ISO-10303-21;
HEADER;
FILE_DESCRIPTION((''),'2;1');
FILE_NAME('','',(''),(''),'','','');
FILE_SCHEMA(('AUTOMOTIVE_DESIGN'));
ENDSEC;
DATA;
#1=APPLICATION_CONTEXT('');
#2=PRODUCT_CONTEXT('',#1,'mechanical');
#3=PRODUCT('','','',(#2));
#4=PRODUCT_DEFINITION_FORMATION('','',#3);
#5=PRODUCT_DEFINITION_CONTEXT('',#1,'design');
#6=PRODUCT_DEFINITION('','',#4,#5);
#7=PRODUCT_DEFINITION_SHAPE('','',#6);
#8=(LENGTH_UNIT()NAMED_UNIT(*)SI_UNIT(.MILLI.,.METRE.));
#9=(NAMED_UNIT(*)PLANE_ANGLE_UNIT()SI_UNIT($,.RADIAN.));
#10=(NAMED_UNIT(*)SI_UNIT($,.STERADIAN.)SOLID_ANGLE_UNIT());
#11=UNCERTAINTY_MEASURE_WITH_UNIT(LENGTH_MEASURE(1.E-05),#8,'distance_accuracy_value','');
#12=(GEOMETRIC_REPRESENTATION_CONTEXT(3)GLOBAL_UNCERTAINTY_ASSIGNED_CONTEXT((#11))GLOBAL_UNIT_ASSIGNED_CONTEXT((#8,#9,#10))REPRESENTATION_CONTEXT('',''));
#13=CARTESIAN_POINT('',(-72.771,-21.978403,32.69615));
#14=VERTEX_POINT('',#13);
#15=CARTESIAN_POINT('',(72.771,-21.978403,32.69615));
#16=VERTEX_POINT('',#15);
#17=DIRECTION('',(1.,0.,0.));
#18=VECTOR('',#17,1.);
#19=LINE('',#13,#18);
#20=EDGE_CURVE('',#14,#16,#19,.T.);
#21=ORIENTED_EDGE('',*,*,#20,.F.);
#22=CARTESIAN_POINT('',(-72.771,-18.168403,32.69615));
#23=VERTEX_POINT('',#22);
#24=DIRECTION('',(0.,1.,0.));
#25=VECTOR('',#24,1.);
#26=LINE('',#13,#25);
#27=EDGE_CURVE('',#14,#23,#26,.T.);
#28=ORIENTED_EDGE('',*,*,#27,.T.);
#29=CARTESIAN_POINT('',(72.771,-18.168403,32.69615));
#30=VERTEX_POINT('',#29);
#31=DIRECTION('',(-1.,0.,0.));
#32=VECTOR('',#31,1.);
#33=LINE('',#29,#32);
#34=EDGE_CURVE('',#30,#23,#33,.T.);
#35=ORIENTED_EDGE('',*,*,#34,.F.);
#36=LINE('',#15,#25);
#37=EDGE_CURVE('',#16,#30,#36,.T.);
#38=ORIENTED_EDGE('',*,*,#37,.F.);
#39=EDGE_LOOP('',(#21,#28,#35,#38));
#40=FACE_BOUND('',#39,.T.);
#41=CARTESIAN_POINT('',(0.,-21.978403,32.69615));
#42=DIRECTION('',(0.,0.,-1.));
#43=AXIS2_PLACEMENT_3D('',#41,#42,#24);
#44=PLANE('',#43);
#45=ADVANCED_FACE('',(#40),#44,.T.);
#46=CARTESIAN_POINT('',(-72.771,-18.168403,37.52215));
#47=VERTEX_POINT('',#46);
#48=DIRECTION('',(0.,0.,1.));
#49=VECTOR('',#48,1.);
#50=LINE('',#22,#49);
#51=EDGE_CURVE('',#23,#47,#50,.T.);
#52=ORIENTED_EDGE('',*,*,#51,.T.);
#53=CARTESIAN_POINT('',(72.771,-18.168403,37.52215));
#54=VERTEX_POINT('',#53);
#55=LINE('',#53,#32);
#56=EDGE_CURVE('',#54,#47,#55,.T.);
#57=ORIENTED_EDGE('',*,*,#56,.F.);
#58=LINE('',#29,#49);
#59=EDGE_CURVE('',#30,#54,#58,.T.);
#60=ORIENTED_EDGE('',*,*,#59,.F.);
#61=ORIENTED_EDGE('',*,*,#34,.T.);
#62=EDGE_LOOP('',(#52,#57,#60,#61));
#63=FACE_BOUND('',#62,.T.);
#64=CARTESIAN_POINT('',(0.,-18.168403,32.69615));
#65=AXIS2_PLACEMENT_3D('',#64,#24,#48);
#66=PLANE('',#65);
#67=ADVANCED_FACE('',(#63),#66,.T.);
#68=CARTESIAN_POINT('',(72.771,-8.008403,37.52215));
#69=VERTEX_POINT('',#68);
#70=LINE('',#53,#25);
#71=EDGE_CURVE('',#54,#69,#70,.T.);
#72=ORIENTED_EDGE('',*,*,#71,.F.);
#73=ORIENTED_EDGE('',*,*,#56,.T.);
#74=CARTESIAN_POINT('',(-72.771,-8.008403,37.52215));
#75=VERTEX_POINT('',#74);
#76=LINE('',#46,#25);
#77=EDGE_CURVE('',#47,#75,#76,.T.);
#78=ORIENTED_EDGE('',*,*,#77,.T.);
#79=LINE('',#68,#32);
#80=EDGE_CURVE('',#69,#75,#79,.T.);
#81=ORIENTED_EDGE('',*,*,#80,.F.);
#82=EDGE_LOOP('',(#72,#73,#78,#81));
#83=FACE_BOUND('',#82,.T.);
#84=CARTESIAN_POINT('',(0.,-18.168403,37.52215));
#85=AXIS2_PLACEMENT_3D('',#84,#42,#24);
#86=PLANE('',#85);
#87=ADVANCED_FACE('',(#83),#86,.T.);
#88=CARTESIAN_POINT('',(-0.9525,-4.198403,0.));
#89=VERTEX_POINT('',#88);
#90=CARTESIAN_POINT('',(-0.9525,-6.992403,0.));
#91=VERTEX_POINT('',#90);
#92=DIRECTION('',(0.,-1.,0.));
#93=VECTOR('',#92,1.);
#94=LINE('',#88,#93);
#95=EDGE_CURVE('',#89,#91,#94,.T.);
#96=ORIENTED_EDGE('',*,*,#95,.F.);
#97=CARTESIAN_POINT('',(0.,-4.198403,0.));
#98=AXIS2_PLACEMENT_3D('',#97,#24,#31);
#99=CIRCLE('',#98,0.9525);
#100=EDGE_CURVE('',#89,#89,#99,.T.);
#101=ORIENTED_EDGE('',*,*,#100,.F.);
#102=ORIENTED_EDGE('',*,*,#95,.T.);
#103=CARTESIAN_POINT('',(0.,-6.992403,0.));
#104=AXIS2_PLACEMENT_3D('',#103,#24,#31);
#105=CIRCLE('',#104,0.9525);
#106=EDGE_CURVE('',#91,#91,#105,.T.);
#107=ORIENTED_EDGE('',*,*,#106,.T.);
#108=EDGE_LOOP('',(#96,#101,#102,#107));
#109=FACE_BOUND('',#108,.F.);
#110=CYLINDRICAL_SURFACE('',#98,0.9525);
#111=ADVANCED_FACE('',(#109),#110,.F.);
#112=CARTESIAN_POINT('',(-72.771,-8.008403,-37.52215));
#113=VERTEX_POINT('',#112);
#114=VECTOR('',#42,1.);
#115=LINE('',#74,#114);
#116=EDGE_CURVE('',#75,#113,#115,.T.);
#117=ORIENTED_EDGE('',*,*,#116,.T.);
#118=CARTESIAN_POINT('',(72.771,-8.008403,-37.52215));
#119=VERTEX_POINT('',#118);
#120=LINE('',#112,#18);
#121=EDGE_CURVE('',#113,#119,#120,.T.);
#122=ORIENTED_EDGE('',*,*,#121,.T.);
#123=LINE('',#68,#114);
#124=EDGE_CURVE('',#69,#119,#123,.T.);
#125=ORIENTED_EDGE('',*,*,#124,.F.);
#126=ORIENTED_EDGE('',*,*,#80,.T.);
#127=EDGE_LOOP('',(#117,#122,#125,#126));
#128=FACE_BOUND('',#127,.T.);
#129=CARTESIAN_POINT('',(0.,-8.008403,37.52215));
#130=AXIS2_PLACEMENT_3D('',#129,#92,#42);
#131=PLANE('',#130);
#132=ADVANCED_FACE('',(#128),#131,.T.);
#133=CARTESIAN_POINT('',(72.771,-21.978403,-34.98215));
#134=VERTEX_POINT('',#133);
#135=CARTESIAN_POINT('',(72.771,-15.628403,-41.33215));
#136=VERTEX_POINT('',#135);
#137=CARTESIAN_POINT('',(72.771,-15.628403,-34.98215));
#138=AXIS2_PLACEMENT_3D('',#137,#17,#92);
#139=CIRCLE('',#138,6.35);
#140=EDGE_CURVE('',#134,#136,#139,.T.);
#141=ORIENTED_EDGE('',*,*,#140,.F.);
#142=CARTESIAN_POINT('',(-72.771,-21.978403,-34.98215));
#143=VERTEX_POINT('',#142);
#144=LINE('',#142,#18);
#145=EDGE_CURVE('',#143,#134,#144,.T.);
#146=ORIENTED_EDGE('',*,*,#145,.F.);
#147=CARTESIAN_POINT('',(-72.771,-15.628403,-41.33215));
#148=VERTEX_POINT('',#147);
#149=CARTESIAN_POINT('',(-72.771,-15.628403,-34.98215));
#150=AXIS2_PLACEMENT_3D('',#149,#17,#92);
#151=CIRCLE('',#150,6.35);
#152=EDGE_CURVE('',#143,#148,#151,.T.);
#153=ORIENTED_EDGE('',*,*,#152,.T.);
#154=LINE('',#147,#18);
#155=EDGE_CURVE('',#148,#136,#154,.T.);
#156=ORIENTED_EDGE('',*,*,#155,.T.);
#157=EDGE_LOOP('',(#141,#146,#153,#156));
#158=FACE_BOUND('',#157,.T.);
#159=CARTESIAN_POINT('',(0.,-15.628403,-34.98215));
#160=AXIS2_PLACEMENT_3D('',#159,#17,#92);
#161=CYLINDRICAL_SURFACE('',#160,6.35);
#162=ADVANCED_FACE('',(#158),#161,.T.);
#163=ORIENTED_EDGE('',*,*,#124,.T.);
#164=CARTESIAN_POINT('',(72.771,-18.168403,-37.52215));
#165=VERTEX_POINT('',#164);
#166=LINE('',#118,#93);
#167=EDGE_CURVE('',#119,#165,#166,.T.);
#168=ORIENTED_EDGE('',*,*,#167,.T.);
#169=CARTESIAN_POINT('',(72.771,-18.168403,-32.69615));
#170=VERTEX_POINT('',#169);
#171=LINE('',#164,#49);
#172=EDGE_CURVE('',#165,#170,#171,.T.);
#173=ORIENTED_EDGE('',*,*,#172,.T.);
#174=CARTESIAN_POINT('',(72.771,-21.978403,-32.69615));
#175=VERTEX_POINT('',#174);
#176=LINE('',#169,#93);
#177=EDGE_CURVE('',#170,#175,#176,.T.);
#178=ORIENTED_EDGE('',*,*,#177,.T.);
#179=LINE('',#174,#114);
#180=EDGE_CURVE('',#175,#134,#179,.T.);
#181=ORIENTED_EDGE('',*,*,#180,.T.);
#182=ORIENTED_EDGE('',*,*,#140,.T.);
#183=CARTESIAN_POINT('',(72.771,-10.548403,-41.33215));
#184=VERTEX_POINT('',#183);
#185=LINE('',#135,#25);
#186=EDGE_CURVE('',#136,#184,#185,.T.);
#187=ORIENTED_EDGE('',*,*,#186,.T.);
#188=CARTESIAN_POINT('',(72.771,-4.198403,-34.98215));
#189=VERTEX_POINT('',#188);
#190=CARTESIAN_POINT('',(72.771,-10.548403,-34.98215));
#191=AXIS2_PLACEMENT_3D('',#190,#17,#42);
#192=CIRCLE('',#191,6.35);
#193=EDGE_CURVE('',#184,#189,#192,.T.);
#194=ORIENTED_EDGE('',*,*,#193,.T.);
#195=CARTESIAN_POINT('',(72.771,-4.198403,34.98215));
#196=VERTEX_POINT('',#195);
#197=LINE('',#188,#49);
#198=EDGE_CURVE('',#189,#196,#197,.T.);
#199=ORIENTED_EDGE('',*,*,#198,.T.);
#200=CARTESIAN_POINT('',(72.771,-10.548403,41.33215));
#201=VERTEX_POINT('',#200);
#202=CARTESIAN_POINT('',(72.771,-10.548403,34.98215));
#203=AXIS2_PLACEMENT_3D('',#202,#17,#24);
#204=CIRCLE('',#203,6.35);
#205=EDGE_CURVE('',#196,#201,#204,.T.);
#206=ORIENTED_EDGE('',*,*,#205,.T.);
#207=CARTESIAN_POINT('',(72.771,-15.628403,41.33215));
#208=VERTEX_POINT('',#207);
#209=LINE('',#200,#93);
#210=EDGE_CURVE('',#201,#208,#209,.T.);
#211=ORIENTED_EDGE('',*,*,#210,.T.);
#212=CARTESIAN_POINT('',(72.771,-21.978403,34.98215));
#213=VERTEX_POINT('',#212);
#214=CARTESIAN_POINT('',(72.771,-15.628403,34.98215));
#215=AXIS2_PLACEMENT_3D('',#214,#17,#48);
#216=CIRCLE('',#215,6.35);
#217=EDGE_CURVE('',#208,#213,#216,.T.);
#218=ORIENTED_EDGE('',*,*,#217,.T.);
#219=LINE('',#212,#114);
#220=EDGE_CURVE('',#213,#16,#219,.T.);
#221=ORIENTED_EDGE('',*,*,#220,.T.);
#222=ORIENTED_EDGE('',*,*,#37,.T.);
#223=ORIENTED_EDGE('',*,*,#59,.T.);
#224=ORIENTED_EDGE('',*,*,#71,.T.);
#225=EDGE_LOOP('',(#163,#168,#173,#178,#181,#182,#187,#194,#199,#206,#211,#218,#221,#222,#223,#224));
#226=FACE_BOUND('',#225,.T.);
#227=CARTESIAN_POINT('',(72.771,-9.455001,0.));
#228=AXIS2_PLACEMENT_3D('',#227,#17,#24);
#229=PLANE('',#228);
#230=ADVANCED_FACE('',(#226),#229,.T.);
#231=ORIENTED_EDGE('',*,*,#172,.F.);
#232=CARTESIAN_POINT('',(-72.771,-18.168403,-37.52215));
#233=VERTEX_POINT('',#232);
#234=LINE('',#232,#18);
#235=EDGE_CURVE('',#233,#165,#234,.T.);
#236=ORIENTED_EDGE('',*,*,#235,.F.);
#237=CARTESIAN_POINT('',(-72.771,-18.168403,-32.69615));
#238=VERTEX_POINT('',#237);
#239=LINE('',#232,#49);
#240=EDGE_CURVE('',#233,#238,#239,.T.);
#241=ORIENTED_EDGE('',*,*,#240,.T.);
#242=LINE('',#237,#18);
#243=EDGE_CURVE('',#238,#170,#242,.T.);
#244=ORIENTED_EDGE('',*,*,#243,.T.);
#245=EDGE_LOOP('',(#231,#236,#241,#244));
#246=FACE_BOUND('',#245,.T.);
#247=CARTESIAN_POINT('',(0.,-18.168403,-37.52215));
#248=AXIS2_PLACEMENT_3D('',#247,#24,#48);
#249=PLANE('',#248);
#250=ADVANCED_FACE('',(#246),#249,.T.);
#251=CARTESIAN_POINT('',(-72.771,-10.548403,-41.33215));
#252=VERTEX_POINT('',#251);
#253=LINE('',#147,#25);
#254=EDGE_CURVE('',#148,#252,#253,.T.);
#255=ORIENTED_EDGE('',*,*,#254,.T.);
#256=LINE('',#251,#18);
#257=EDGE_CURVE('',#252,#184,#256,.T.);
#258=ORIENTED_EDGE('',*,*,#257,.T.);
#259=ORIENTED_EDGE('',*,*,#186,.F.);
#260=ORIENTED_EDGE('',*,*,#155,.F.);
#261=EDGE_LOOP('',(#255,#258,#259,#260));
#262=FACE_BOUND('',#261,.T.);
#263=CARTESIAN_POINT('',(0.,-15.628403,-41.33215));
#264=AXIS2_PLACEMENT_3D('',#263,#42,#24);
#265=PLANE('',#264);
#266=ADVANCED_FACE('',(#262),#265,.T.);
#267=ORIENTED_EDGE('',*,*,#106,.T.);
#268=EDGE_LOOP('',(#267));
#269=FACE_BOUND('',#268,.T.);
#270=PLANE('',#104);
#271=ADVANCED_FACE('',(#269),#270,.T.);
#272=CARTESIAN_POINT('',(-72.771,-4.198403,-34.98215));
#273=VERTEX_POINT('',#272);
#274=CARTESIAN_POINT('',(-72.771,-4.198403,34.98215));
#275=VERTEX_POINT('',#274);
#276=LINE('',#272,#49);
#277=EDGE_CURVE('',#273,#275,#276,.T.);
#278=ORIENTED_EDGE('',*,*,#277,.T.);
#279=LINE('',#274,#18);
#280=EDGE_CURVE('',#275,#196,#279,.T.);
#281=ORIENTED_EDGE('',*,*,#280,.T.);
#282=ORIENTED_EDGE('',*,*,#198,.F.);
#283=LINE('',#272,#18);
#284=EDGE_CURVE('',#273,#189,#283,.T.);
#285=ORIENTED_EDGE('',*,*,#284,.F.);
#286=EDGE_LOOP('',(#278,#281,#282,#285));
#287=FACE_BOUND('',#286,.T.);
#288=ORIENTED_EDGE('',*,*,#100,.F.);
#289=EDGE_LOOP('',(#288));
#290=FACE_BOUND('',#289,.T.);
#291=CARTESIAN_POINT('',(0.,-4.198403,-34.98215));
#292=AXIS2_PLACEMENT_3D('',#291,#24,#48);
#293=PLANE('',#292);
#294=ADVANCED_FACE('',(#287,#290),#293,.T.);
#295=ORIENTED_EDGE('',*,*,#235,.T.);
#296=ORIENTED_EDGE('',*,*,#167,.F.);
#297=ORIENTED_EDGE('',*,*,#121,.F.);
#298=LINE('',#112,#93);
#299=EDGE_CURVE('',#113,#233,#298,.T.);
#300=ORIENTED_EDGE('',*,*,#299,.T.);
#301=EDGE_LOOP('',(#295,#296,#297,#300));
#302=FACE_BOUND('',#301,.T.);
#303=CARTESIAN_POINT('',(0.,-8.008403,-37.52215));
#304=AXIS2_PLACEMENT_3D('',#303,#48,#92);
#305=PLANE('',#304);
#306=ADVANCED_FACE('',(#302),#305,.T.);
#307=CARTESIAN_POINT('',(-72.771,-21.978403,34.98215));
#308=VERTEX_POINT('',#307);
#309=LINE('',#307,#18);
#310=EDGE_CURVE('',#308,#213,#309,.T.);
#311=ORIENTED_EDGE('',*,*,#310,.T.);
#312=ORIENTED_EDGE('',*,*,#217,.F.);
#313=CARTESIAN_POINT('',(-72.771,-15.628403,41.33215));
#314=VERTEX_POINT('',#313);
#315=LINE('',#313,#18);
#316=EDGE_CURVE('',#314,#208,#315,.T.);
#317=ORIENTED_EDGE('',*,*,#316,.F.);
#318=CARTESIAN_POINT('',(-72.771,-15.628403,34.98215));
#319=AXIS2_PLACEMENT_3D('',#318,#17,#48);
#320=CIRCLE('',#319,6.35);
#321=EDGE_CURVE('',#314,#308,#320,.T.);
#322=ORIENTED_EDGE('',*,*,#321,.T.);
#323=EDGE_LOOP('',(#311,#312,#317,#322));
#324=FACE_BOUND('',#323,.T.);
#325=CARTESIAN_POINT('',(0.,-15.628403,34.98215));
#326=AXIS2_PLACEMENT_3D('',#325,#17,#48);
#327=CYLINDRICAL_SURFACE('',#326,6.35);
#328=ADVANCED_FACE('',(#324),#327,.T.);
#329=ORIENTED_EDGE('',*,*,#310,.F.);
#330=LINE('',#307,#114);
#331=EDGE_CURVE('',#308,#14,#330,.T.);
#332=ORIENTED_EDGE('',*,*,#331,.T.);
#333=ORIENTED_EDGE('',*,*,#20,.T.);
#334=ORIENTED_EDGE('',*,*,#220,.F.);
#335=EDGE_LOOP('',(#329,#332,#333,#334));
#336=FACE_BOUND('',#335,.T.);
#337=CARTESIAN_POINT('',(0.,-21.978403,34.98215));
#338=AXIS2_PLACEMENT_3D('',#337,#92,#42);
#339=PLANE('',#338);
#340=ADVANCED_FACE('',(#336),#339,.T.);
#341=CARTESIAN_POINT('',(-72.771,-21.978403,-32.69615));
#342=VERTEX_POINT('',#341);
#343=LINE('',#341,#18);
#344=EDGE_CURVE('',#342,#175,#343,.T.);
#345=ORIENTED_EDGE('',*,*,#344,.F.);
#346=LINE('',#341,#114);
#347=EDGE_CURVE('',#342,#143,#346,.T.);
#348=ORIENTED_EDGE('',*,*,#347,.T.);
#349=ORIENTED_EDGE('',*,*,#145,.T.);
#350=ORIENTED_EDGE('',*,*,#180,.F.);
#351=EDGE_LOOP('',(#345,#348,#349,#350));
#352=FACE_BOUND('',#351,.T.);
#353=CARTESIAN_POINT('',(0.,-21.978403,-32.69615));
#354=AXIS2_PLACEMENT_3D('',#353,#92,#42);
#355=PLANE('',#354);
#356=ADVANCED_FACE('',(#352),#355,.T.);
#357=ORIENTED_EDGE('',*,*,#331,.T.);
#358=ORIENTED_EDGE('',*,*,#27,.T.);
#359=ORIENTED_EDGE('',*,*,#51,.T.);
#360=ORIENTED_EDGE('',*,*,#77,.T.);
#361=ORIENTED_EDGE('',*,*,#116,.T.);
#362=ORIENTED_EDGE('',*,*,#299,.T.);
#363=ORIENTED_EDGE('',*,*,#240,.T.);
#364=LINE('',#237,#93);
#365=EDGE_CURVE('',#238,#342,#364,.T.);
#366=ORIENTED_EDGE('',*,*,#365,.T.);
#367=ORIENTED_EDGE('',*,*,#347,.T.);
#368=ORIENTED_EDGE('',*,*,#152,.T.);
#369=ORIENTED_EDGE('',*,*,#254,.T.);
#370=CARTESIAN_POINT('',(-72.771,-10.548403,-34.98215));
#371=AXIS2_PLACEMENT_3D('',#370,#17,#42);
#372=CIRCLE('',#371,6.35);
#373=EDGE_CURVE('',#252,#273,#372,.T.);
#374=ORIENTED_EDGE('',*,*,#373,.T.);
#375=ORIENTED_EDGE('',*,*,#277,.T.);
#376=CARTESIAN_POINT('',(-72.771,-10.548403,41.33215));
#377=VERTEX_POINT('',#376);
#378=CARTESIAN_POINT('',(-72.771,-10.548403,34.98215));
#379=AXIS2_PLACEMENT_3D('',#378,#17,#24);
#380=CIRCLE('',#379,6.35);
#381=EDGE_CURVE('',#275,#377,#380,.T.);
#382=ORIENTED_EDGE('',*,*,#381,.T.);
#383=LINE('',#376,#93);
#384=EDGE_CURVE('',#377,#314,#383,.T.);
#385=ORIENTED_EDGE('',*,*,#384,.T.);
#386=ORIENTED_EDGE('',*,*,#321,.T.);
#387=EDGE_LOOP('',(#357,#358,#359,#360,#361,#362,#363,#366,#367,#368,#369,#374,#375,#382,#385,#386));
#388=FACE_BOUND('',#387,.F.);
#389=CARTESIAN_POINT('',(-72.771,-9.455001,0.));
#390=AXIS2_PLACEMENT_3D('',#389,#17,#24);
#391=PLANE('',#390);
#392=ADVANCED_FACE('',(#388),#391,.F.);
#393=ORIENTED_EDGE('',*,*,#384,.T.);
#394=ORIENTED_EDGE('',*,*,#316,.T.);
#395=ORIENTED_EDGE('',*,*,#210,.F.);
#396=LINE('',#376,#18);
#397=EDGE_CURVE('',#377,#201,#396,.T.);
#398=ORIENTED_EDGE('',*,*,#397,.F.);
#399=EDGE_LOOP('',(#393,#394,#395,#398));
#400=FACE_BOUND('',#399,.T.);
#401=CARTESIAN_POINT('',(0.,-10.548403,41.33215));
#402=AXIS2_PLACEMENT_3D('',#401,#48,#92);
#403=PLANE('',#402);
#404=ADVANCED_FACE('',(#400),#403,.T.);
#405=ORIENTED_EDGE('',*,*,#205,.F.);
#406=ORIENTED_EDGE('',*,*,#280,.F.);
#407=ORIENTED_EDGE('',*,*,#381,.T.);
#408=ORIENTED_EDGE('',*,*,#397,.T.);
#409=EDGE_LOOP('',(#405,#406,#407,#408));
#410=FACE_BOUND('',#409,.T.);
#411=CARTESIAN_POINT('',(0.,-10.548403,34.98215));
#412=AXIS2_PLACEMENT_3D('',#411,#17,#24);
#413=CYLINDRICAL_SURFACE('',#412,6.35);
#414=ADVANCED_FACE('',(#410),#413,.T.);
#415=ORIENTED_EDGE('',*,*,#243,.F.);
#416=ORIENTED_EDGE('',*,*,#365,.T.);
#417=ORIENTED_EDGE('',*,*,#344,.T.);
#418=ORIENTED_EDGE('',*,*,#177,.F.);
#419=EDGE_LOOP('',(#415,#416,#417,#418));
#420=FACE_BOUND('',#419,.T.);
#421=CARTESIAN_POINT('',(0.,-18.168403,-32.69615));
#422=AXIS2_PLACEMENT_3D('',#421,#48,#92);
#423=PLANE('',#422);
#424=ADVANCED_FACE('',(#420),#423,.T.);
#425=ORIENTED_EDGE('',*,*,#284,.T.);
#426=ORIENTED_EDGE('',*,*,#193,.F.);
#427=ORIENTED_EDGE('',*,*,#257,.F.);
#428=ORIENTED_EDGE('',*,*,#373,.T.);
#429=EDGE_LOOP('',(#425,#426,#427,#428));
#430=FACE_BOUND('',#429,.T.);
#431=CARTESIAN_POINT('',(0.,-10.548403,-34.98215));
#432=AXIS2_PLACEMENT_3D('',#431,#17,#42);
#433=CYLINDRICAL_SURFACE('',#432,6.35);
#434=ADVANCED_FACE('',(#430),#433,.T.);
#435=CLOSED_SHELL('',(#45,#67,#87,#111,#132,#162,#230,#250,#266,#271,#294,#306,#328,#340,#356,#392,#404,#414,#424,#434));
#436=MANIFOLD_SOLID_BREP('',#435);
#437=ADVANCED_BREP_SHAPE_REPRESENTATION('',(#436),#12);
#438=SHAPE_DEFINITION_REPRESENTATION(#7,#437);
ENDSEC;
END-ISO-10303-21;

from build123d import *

# Parameters (mm, degrees)
F1_DEPTH      = 72.771
F1_DEPTH_BACK = 72.771
F2_R          = 0.9525
F3_DEPTH      = 2.794


# Not quite as in the source:
# - a length typed as a fraction of an inch, garbled in the dataset ("3 / 203.2 mm" for 3/8 in), is restored


with BuildPart() as f1:
    # F0 (on Right) → F1 (new body, two sides)
    with BuildSketch(Plane.YZ) as f1_sk:
        with BuildLine():
            Line((-8.008403407, 37.52215), (-8.008403407, 0))
            Line((-8.008403407, 0), (-8.008403407, -37.52215))
            Line((-8.008403407, -37.52215), (-18.168403407, -37.52215))
            Line((-18.168403407, -37.52215), (-18.168403407, -32.69615))
            Line((-18.168403407, -32.69615), (-21.978403407, -32.69615))
            Line((-21.978403407, -32.69615), (-21.978403407, -34.98215))
            ThreePointArc((-21.978403407, -34.98215), (-20.1185314675, -39.4722780605), (-15.628403407, -41.33215))
            Line((-15.628403407, -41.33215), (-10.548403407, -41.33215))
            ThreePointArc((-10.548403407, -41.33215), (-6.0582753465, -39.4722780605), (-4.198403407, -34.98215))
            Line((-4.198403407, -34.98215), (-4.198403407, 0))
            Line((-4.198403407, 0), (-4.198403407, 34.98215))
            ThreePointArc((-4.198403407, 34.98215), (-6.0582753465, 39.4722780605), (-10.548403407, 41.33215))
            Line((-10.548403407, 41.33215), (-15.628403407, 41.33215))
            ThreePointArc((-15.628403407, 41.33215), (-20.1185314675, 39.4722780605), (-21.978403407, 34.98215))
            Line((-21.978403407, 34.98215), (-21.978403407, 32.69615))
            Line((-21.978403407, 32.69615), (-18.168403407, 32.69615))
            Line((-18.168403407, 32.69615), (-18.168403407, 37.52215))
            Line((-18.168403407, 37.52215), (-8.008403407, 37.52215))
        make_face()
    extrude(amount=F1_DEPTH)
    extrude(f1_sk.sketch, amount=-F1_DEPTH_BACK)

    # F2 (on face) → F3 (cut)
    with BuildSketch(Plane(origin=(0, -4.198403407, 0), x_dir=(-1, 0, 0), z_dir=(0, 1, 0))):
        Circle(F2_R)
    extrude(amount=-F3_DEPTH, mode=Mode.SUBTRACT)


solid = f1.part
